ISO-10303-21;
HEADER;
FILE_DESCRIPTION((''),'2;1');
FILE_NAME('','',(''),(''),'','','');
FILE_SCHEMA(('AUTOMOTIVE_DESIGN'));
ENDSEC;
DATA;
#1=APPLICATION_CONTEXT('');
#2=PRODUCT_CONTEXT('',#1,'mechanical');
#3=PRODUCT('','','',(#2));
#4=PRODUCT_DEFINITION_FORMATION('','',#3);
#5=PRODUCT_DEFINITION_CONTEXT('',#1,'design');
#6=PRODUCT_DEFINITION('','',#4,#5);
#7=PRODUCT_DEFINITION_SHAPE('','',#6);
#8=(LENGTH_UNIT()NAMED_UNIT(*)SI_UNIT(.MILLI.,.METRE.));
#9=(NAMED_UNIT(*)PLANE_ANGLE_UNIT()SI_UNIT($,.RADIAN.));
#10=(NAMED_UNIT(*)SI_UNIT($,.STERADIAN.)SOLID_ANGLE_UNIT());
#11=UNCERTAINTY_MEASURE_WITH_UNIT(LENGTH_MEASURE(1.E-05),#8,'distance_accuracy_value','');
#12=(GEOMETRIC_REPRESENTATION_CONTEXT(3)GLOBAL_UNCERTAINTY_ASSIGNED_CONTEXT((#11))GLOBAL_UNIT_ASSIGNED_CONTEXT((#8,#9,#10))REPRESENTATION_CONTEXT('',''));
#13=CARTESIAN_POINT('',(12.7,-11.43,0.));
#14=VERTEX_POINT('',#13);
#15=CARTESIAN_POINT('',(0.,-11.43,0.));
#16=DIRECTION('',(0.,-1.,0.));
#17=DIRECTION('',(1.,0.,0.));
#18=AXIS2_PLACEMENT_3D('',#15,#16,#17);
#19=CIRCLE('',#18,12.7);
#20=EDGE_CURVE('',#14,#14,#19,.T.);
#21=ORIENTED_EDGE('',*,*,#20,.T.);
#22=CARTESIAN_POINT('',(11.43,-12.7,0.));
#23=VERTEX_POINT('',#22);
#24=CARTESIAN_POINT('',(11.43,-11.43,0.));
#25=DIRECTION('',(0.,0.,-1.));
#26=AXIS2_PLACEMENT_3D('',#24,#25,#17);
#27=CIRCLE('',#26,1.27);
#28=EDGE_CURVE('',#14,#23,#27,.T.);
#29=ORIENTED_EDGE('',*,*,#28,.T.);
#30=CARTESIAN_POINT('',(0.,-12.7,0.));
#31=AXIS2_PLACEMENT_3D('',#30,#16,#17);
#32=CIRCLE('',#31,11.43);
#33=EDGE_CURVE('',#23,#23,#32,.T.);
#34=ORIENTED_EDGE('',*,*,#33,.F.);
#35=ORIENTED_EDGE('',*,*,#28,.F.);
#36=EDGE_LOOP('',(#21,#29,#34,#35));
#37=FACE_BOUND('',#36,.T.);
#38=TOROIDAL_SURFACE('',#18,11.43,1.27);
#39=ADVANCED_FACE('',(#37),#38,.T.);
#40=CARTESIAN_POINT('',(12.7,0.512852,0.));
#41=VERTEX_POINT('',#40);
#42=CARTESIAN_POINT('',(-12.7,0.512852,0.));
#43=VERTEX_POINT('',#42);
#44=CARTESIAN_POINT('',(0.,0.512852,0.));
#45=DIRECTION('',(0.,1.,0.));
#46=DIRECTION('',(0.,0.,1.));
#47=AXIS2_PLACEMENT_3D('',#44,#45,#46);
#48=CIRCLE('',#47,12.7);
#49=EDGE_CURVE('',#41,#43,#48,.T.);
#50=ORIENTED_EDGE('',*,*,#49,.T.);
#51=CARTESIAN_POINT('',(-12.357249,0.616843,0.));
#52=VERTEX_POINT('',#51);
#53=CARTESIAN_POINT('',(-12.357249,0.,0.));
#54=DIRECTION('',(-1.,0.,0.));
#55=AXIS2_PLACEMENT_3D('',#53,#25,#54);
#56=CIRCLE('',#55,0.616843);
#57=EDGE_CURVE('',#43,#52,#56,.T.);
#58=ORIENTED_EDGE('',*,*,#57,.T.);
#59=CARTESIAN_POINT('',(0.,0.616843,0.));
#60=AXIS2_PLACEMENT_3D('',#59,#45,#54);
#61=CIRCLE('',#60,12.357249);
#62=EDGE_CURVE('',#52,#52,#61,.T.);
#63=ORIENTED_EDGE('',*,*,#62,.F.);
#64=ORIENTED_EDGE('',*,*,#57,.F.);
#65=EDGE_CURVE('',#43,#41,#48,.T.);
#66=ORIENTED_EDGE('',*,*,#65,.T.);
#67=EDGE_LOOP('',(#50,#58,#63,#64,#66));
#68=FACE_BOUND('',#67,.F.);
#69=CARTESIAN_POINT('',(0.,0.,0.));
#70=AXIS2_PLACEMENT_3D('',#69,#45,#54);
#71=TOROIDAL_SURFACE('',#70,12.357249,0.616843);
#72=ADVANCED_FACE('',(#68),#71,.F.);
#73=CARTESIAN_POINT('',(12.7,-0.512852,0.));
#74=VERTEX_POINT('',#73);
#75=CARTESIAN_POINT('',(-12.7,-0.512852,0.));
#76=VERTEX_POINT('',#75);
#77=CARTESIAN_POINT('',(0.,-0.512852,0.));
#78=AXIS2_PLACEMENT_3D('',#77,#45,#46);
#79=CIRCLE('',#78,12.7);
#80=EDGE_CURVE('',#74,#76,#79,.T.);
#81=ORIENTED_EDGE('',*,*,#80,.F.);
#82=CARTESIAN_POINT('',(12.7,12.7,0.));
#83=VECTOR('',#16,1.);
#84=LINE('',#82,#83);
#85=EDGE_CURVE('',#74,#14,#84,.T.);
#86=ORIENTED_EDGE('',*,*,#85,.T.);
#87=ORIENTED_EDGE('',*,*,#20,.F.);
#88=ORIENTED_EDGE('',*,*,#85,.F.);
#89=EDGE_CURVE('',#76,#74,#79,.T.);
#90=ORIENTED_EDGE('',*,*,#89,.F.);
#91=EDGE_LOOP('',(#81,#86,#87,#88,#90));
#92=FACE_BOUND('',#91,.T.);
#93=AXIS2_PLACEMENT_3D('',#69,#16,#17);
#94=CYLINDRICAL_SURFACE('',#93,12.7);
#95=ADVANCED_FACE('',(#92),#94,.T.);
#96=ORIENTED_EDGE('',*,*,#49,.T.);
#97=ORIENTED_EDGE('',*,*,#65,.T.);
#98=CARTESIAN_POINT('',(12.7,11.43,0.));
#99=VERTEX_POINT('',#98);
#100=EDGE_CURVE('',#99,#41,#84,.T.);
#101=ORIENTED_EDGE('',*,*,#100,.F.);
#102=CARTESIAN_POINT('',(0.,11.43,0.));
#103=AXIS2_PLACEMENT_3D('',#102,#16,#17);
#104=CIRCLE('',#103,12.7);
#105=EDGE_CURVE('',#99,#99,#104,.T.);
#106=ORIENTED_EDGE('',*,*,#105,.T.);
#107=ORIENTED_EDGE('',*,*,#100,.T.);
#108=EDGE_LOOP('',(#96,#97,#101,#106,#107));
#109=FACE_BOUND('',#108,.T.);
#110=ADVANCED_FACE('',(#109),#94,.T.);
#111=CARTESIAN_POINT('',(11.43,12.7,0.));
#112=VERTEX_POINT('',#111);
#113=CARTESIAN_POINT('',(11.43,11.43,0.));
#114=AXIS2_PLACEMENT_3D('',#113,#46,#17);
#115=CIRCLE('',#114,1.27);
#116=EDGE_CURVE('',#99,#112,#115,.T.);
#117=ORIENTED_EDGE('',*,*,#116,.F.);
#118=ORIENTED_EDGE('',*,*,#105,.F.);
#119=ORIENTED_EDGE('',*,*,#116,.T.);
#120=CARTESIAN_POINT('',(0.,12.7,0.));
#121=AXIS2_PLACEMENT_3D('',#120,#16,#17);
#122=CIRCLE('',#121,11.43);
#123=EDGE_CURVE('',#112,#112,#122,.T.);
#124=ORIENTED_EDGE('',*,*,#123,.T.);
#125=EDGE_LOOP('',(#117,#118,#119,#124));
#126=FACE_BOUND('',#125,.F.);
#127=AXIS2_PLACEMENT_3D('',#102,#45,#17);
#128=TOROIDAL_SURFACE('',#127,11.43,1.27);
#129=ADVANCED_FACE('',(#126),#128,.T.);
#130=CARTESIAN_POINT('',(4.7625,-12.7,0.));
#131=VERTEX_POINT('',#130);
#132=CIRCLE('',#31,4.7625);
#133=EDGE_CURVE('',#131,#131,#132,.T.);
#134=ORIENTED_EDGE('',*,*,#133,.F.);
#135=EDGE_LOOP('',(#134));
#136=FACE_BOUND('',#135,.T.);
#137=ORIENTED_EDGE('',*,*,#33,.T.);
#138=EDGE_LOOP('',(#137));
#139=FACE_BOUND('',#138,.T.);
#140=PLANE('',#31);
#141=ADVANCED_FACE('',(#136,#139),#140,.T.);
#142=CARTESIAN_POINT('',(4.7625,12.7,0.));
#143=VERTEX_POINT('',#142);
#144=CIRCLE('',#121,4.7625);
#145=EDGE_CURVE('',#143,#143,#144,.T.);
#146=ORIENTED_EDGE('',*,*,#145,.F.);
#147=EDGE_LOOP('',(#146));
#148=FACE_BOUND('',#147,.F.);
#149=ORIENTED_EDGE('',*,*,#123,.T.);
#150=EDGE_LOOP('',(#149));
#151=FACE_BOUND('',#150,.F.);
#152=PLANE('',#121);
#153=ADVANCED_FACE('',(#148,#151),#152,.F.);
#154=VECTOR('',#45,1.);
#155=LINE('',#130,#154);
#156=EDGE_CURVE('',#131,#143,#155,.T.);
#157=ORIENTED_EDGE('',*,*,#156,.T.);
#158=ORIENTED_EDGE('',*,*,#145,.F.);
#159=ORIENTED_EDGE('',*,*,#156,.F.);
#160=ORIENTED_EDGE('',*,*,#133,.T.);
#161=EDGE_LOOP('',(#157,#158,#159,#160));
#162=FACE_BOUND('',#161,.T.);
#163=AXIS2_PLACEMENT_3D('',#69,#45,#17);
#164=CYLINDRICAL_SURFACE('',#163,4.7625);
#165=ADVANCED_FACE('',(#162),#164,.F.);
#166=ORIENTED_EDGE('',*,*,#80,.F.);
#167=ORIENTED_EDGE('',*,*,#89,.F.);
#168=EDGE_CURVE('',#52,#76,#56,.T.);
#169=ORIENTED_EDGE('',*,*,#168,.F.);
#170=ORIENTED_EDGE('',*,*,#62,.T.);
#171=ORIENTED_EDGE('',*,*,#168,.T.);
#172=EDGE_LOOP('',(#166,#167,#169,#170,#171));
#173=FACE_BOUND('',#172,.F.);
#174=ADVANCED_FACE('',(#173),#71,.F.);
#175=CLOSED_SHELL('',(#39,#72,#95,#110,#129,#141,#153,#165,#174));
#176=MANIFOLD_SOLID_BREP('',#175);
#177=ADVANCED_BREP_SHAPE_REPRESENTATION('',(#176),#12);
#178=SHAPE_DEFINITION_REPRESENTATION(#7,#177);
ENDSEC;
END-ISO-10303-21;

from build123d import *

# Parameters (mm, degrees)
F0_R     = 12.7
F0_R_2   = 4.7625
F1_DEPTH = 12.7
F3_R     = 1.27
F6_R     = 0.6168431606


with BuildPart() as f1:
    # F0 (on Front) → F1 (new body, symmetric)
    with BuildSketch(Plane.XZ):
        Circle(F0_R)
        Circle(F0_R_2, mode=Mode.SUBTRACT)
    extrude(amount=F1_DEPTH, both=True)

    # F3
    f3_edges = [f1.edges().sort_by_distance(p)[0] for p in [
        (-12.7, 12.7, 0),
        (-12.7, -12.7, 0),
    ]]
    fillet(f3_edges, radius=F3_R)

    # F7: sweep along a path in F4
    with BuildLine(Plane(origin=(0, 0, 0), x_dir=(-1, 0, 0), z_dir=(0, 1, 0))) as f7_path:
        CenterArc((0, 0), 12.319, 0, 360)
    # F6 (on line) → F7 (sweep, cut)
    with BuildSketch(Plane.YZ):
        with Locations((0, 12.3572489247)):
            Circle(F6_R)
    sweep(path=f7_path.line, mode=Mode.SUBTRACT)


solid = f1.part
